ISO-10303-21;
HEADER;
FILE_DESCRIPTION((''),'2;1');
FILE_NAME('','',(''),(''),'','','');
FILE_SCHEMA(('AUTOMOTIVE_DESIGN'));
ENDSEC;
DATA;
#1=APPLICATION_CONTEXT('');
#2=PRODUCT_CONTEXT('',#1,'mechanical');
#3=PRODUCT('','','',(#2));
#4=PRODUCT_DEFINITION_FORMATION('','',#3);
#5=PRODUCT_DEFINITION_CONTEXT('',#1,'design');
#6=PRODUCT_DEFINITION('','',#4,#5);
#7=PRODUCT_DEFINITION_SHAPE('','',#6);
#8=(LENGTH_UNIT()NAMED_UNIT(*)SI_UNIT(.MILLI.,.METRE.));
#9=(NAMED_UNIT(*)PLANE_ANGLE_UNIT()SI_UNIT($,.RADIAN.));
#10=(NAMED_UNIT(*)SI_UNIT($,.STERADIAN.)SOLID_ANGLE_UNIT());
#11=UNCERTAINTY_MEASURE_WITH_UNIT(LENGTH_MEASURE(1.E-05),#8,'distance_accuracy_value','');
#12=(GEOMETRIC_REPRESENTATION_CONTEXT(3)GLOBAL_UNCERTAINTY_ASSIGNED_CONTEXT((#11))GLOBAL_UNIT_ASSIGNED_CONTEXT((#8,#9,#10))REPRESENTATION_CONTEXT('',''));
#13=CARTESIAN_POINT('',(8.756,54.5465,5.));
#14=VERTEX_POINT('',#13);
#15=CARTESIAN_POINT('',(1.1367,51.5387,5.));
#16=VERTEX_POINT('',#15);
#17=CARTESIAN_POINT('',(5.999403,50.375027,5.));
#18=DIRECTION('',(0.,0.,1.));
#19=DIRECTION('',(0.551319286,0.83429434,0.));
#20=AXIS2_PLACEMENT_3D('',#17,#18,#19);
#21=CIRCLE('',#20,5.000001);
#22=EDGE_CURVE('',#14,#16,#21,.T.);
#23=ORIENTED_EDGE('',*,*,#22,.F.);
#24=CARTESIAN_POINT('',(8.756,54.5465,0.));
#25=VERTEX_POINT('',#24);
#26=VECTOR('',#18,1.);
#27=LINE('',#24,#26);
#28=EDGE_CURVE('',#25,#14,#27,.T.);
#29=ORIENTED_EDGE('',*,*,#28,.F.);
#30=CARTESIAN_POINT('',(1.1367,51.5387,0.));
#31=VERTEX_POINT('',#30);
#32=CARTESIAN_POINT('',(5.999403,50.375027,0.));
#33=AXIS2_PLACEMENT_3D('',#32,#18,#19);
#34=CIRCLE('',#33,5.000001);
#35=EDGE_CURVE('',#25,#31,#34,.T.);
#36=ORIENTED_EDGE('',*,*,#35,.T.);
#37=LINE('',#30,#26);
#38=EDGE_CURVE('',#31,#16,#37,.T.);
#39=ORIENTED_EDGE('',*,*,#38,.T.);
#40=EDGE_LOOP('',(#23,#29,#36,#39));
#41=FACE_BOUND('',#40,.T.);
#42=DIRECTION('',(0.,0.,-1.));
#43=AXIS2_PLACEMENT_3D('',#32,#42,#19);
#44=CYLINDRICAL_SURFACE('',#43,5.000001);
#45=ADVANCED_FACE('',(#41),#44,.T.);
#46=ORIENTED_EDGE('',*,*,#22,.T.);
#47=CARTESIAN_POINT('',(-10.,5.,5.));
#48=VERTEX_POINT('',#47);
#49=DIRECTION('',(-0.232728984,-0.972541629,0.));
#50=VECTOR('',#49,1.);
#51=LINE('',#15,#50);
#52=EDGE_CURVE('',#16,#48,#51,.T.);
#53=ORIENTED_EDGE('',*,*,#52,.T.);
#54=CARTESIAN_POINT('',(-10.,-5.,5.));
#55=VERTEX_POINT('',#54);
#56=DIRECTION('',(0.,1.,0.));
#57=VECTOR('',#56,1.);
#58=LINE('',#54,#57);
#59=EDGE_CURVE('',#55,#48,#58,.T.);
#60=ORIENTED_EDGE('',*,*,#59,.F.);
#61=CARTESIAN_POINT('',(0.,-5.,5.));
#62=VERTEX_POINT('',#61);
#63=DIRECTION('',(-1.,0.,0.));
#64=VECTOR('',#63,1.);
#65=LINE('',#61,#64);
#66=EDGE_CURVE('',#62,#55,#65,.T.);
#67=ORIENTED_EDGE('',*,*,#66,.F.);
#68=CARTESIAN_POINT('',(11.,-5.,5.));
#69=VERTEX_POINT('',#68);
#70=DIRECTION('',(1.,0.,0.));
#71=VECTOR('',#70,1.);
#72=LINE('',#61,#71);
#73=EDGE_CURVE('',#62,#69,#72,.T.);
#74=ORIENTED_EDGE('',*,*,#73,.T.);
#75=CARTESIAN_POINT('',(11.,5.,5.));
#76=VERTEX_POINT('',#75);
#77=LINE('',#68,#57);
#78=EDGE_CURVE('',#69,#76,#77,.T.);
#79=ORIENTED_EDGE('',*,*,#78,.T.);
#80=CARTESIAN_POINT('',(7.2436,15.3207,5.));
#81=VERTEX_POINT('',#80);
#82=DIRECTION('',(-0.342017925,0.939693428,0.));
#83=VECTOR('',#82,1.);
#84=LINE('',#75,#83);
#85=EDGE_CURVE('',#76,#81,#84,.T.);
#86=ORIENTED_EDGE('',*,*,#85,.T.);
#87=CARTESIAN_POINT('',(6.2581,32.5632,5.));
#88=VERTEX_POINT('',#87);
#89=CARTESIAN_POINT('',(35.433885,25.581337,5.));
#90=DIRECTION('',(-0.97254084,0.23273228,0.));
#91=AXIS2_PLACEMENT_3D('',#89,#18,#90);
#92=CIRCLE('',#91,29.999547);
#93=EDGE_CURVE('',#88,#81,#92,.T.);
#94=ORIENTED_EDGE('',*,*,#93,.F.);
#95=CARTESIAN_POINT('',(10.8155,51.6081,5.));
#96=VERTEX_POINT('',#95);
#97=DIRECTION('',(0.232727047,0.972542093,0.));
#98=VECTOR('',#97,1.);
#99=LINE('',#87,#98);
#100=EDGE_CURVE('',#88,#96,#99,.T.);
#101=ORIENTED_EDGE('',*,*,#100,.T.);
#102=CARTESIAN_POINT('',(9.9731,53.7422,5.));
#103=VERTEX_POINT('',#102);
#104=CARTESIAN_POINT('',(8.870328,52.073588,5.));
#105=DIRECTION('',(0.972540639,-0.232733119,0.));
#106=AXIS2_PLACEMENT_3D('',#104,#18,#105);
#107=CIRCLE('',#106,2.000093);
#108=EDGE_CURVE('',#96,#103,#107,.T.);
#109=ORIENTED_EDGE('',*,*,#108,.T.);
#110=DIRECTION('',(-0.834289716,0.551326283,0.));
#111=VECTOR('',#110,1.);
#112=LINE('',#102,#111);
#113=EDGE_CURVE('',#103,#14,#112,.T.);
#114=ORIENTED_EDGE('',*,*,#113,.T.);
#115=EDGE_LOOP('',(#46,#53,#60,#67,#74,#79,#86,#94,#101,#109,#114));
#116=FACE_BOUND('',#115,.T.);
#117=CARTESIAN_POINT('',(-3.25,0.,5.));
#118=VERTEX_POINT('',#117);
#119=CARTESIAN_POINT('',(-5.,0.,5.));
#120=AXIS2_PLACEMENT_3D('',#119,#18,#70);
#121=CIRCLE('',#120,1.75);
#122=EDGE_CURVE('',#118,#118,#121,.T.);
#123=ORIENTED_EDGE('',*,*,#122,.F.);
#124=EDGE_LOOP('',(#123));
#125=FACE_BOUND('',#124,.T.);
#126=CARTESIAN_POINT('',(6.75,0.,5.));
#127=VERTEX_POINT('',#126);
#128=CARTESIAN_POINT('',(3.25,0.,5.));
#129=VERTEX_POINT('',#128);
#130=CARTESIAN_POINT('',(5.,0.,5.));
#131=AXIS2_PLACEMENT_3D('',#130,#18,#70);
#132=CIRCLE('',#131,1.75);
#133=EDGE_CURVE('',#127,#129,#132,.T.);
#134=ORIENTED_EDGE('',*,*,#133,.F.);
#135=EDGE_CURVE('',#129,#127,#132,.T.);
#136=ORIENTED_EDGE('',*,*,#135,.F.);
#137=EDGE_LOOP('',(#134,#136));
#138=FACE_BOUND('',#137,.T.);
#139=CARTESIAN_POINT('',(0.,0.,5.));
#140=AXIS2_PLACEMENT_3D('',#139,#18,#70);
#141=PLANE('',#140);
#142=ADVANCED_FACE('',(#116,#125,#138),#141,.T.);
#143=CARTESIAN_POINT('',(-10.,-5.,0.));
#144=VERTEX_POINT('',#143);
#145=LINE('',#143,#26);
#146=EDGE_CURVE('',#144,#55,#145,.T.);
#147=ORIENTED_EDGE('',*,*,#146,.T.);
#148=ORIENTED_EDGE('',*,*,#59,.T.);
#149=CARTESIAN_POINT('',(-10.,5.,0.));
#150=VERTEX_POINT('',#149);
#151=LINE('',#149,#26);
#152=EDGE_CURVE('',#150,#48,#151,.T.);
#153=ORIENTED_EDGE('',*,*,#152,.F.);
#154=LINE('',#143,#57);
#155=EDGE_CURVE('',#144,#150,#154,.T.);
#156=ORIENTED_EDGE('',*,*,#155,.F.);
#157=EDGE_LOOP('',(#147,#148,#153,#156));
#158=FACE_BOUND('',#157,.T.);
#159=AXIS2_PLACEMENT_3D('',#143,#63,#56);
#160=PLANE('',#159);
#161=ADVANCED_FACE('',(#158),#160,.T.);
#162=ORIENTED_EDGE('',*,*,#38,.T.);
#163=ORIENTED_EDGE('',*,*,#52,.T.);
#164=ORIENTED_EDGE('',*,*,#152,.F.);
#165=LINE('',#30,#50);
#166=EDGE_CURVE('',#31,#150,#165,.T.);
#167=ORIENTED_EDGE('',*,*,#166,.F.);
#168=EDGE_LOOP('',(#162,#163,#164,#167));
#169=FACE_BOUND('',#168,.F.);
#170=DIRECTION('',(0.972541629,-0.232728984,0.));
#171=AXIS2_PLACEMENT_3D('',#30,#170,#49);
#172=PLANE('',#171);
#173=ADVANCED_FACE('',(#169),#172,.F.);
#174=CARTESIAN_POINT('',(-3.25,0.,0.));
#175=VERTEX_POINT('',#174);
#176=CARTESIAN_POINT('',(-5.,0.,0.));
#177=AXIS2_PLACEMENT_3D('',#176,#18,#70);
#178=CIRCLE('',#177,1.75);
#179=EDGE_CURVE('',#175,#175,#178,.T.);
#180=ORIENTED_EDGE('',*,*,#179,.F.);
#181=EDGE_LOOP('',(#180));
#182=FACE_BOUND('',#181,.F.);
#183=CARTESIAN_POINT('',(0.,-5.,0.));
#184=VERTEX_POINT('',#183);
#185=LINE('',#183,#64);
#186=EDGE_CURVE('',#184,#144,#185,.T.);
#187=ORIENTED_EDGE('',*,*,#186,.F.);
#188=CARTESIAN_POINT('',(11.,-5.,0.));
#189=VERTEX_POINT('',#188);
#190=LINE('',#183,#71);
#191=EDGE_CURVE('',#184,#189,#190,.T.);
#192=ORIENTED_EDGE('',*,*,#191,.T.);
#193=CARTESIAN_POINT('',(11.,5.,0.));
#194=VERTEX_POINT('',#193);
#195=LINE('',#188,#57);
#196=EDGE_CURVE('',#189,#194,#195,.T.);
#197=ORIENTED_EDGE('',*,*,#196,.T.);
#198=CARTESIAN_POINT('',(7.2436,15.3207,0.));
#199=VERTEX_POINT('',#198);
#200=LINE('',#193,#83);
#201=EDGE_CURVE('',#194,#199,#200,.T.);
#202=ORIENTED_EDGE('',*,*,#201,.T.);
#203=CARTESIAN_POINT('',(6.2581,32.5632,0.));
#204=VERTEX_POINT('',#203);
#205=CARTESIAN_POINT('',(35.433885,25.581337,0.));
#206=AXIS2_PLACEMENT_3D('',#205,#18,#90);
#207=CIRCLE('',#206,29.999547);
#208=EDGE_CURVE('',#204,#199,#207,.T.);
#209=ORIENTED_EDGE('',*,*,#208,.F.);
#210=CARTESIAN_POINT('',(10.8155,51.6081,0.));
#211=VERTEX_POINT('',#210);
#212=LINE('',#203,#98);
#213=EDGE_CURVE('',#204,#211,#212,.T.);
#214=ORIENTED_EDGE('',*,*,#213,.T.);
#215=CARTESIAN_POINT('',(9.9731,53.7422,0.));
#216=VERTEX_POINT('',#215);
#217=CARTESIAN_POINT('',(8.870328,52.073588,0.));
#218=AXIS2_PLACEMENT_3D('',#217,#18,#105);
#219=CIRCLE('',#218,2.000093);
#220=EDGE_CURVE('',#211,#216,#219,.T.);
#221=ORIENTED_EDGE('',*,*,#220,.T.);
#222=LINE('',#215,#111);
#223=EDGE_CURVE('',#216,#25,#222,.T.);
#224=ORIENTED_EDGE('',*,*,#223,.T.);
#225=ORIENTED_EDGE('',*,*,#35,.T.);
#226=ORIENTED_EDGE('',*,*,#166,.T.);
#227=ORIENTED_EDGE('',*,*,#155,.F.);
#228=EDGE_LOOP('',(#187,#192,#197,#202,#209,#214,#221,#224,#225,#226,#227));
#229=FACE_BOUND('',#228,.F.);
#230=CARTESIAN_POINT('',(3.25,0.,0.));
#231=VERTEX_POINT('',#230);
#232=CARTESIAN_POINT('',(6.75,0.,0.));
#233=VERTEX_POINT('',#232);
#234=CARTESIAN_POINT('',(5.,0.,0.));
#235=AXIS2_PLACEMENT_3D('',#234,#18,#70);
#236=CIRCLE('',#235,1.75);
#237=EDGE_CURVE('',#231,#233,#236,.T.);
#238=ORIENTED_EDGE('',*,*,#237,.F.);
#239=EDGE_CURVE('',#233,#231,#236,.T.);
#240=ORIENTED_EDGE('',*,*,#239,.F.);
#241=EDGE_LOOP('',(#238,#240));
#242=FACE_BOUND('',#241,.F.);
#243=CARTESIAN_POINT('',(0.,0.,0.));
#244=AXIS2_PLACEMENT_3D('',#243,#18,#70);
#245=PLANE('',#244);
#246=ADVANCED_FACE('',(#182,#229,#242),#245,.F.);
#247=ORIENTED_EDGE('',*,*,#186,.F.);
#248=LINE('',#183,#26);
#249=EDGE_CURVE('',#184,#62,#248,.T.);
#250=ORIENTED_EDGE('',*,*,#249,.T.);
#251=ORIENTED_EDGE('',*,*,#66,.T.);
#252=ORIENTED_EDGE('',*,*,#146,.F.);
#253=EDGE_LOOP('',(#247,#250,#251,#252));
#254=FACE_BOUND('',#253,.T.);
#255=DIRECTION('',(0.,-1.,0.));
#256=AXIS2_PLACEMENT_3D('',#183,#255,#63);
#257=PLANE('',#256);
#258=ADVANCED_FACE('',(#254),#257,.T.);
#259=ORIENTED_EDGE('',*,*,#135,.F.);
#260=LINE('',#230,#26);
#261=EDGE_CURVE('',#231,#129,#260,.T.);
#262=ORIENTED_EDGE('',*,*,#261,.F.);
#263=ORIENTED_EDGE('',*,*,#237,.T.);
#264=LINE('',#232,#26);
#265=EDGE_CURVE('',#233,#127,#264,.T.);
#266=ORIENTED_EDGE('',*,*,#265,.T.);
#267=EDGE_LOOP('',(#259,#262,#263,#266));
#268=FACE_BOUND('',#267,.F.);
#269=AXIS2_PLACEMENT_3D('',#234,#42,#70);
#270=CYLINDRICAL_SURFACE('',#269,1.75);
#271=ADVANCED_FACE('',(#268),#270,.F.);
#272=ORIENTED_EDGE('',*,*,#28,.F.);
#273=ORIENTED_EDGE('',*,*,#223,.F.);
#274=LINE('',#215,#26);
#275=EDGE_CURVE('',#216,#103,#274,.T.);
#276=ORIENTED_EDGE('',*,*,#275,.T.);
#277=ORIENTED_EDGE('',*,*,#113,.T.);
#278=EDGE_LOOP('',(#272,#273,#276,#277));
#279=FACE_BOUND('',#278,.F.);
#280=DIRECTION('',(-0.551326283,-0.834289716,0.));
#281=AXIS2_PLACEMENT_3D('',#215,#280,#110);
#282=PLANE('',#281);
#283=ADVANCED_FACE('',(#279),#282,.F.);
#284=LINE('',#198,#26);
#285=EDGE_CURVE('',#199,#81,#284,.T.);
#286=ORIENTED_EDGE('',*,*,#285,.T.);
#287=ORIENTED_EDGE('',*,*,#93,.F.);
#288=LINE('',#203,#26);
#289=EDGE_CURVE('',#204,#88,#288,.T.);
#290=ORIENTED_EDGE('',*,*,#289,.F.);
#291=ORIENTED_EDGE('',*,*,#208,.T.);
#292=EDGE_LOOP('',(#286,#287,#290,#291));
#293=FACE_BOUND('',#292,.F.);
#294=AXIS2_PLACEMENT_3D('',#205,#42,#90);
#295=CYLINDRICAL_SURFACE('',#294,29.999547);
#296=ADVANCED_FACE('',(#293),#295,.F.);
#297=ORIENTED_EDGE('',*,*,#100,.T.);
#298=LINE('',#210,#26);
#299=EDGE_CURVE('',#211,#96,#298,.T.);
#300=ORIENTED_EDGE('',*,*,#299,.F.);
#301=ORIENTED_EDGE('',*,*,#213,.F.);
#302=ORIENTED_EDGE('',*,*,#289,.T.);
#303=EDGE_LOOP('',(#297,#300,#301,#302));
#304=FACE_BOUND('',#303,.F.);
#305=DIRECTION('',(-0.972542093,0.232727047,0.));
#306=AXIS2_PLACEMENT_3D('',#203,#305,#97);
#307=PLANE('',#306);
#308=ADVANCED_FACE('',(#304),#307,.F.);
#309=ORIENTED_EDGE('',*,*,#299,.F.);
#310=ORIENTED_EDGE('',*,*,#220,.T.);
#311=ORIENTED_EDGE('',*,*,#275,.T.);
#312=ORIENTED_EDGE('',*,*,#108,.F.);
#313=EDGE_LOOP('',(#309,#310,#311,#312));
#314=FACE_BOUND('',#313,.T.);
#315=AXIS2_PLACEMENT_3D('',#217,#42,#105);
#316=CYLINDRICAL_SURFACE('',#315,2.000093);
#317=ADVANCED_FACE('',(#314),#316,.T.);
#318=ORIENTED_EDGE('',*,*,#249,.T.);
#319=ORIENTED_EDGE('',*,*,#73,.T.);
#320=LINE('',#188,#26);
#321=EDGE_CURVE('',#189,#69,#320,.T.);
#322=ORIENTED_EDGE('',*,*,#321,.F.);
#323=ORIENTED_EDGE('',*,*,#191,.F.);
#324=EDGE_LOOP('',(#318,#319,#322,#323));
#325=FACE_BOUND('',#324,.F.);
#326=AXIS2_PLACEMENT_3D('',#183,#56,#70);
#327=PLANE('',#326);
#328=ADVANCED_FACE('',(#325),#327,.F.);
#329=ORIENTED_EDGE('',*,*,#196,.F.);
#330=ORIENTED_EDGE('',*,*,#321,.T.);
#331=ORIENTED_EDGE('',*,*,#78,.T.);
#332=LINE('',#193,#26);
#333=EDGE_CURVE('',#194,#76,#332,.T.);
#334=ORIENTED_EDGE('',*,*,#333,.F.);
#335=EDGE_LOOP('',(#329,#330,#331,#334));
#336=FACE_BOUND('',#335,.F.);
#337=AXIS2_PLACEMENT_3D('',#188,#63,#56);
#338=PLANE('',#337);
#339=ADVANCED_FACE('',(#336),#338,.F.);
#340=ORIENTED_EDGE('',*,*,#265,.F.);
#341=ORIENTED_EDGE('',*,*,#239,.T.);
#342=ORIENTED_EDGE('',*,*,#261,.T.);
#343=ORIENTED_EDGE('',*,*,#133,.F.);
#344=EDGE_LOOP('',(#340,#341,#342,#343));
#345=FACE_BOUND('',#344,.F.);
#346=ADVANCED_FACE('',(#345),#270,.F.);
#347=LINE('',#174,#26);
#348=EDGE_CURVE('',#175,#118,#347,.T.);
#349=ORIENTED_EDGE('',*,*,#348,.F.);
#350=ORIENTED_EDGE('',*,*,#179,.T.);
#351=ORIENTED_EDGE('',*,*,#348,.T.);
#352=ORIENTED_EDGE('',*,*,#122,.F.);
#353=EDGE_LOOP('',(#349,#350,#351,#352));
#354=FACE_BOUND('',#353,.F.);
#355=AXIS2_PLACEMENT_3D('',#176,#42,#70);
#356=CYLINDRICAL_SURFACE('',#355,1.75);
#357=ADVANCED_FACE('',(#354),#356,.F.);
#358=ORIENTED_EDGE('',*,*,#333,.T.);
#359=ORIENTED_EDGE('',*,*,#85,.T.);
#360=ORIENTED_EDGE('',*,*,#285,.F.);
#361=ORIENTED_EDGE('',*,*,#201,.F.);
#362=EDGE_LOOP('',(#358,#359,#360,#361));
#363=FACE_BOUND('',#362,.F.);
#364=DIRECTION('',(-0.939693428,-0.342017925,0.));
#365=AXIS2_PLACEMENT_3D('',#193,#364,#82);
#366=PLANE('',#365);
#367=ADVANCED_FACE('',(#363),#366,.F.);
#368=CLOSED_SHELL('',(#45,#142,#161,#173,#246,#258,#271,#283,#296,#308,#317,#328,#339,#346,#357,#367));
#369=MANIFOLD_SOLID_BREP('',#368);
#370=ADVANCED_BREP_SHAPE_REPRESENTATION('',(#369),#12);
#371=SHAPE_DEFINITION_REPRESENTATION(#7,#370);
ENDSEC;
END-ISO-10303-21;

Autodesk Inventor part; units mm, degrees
ref_plane "YZ Plane" through (0, 0, 0) normal (1, 0, 0) x (0, 1, 0)
ref_plane "XZ Plane" through (0, 0, 0) normal (0, 1, 0) x (-1, 0, 0)
ref_plane "XY Plane" through (0, 0, 0) normal (0, 0, 1) x (1, 0, 0)
sketch "Sketch1" plane through (0, 0, 0) normal (0, 0, 1) x (1, 0, 0)
  line L0 (0, 0) -> (5, 0)
  line L1 (5, 0) -> (-5, 0)
  circle A0 centre (-5, 0) radius 1.75
  circle A1 centre (5, 0) radius 1.75
  line L2 (0, 0) -> (0, -5)
  line L3 (0, -5) -> (11, -5)
  line L4 (11, -5) -> (11, 5)
  line L5 (0, -5) -> (-10, -5)
  line L6 (-10, -5) -> (-10, 5)
  line L7 (11, 5) -> (7.2436, 15.3207)
  line L8 (11, 5) -> (21.9831, 5) construction
  line L9 (6.2581, 32.5632) -> (10.8155, 51.6081)
  line L10 (9.9731, 53.7422) -> (8.756, 54.5465)
  line L11 (1.1367, 51.5387) -> (-10, 5)
  arc A2 (6.2581, 32.5632) -> (7.2436, 15.3207) centre (35.4343, 25.5813) ccw
  arc A3 (10.8155, 51.6081) -> (9.9731, 53.7422) centre (8.8705, 52.0736) ccw
  arc A4 (8.756, 54.5465) -> (1.1367, 51.5387) centre (5.9994, 50.375) ccw
  point P0 (4.1596, 23.7939)
  point P1 (11.1415, 52.9701)
  point P2 (2.7985, 58.4833)
  dimension "d0" = 5
  dimension "d1" = 10
  dimension "d2" = 3.5
  dimension "d3" = 3.5
  dimension "d4" = 5
  dimension "d5" = 11
  dimension "d6" = 10
  dimension "d7" = 10
  dimension "d8" = 10
  dimension "d9" = 20
  dimension "d10" = 110
  dimension "d11" = 30
  dimension "d12" = 10
  dimension "d13" = 110
  dimension "d14" = 30
  dimension "d15" = 2
  dimension "d16" = 5
extrude "Extrusion1" add sketch "Sketch1" along normal blind 5
properties part number "gripper"
